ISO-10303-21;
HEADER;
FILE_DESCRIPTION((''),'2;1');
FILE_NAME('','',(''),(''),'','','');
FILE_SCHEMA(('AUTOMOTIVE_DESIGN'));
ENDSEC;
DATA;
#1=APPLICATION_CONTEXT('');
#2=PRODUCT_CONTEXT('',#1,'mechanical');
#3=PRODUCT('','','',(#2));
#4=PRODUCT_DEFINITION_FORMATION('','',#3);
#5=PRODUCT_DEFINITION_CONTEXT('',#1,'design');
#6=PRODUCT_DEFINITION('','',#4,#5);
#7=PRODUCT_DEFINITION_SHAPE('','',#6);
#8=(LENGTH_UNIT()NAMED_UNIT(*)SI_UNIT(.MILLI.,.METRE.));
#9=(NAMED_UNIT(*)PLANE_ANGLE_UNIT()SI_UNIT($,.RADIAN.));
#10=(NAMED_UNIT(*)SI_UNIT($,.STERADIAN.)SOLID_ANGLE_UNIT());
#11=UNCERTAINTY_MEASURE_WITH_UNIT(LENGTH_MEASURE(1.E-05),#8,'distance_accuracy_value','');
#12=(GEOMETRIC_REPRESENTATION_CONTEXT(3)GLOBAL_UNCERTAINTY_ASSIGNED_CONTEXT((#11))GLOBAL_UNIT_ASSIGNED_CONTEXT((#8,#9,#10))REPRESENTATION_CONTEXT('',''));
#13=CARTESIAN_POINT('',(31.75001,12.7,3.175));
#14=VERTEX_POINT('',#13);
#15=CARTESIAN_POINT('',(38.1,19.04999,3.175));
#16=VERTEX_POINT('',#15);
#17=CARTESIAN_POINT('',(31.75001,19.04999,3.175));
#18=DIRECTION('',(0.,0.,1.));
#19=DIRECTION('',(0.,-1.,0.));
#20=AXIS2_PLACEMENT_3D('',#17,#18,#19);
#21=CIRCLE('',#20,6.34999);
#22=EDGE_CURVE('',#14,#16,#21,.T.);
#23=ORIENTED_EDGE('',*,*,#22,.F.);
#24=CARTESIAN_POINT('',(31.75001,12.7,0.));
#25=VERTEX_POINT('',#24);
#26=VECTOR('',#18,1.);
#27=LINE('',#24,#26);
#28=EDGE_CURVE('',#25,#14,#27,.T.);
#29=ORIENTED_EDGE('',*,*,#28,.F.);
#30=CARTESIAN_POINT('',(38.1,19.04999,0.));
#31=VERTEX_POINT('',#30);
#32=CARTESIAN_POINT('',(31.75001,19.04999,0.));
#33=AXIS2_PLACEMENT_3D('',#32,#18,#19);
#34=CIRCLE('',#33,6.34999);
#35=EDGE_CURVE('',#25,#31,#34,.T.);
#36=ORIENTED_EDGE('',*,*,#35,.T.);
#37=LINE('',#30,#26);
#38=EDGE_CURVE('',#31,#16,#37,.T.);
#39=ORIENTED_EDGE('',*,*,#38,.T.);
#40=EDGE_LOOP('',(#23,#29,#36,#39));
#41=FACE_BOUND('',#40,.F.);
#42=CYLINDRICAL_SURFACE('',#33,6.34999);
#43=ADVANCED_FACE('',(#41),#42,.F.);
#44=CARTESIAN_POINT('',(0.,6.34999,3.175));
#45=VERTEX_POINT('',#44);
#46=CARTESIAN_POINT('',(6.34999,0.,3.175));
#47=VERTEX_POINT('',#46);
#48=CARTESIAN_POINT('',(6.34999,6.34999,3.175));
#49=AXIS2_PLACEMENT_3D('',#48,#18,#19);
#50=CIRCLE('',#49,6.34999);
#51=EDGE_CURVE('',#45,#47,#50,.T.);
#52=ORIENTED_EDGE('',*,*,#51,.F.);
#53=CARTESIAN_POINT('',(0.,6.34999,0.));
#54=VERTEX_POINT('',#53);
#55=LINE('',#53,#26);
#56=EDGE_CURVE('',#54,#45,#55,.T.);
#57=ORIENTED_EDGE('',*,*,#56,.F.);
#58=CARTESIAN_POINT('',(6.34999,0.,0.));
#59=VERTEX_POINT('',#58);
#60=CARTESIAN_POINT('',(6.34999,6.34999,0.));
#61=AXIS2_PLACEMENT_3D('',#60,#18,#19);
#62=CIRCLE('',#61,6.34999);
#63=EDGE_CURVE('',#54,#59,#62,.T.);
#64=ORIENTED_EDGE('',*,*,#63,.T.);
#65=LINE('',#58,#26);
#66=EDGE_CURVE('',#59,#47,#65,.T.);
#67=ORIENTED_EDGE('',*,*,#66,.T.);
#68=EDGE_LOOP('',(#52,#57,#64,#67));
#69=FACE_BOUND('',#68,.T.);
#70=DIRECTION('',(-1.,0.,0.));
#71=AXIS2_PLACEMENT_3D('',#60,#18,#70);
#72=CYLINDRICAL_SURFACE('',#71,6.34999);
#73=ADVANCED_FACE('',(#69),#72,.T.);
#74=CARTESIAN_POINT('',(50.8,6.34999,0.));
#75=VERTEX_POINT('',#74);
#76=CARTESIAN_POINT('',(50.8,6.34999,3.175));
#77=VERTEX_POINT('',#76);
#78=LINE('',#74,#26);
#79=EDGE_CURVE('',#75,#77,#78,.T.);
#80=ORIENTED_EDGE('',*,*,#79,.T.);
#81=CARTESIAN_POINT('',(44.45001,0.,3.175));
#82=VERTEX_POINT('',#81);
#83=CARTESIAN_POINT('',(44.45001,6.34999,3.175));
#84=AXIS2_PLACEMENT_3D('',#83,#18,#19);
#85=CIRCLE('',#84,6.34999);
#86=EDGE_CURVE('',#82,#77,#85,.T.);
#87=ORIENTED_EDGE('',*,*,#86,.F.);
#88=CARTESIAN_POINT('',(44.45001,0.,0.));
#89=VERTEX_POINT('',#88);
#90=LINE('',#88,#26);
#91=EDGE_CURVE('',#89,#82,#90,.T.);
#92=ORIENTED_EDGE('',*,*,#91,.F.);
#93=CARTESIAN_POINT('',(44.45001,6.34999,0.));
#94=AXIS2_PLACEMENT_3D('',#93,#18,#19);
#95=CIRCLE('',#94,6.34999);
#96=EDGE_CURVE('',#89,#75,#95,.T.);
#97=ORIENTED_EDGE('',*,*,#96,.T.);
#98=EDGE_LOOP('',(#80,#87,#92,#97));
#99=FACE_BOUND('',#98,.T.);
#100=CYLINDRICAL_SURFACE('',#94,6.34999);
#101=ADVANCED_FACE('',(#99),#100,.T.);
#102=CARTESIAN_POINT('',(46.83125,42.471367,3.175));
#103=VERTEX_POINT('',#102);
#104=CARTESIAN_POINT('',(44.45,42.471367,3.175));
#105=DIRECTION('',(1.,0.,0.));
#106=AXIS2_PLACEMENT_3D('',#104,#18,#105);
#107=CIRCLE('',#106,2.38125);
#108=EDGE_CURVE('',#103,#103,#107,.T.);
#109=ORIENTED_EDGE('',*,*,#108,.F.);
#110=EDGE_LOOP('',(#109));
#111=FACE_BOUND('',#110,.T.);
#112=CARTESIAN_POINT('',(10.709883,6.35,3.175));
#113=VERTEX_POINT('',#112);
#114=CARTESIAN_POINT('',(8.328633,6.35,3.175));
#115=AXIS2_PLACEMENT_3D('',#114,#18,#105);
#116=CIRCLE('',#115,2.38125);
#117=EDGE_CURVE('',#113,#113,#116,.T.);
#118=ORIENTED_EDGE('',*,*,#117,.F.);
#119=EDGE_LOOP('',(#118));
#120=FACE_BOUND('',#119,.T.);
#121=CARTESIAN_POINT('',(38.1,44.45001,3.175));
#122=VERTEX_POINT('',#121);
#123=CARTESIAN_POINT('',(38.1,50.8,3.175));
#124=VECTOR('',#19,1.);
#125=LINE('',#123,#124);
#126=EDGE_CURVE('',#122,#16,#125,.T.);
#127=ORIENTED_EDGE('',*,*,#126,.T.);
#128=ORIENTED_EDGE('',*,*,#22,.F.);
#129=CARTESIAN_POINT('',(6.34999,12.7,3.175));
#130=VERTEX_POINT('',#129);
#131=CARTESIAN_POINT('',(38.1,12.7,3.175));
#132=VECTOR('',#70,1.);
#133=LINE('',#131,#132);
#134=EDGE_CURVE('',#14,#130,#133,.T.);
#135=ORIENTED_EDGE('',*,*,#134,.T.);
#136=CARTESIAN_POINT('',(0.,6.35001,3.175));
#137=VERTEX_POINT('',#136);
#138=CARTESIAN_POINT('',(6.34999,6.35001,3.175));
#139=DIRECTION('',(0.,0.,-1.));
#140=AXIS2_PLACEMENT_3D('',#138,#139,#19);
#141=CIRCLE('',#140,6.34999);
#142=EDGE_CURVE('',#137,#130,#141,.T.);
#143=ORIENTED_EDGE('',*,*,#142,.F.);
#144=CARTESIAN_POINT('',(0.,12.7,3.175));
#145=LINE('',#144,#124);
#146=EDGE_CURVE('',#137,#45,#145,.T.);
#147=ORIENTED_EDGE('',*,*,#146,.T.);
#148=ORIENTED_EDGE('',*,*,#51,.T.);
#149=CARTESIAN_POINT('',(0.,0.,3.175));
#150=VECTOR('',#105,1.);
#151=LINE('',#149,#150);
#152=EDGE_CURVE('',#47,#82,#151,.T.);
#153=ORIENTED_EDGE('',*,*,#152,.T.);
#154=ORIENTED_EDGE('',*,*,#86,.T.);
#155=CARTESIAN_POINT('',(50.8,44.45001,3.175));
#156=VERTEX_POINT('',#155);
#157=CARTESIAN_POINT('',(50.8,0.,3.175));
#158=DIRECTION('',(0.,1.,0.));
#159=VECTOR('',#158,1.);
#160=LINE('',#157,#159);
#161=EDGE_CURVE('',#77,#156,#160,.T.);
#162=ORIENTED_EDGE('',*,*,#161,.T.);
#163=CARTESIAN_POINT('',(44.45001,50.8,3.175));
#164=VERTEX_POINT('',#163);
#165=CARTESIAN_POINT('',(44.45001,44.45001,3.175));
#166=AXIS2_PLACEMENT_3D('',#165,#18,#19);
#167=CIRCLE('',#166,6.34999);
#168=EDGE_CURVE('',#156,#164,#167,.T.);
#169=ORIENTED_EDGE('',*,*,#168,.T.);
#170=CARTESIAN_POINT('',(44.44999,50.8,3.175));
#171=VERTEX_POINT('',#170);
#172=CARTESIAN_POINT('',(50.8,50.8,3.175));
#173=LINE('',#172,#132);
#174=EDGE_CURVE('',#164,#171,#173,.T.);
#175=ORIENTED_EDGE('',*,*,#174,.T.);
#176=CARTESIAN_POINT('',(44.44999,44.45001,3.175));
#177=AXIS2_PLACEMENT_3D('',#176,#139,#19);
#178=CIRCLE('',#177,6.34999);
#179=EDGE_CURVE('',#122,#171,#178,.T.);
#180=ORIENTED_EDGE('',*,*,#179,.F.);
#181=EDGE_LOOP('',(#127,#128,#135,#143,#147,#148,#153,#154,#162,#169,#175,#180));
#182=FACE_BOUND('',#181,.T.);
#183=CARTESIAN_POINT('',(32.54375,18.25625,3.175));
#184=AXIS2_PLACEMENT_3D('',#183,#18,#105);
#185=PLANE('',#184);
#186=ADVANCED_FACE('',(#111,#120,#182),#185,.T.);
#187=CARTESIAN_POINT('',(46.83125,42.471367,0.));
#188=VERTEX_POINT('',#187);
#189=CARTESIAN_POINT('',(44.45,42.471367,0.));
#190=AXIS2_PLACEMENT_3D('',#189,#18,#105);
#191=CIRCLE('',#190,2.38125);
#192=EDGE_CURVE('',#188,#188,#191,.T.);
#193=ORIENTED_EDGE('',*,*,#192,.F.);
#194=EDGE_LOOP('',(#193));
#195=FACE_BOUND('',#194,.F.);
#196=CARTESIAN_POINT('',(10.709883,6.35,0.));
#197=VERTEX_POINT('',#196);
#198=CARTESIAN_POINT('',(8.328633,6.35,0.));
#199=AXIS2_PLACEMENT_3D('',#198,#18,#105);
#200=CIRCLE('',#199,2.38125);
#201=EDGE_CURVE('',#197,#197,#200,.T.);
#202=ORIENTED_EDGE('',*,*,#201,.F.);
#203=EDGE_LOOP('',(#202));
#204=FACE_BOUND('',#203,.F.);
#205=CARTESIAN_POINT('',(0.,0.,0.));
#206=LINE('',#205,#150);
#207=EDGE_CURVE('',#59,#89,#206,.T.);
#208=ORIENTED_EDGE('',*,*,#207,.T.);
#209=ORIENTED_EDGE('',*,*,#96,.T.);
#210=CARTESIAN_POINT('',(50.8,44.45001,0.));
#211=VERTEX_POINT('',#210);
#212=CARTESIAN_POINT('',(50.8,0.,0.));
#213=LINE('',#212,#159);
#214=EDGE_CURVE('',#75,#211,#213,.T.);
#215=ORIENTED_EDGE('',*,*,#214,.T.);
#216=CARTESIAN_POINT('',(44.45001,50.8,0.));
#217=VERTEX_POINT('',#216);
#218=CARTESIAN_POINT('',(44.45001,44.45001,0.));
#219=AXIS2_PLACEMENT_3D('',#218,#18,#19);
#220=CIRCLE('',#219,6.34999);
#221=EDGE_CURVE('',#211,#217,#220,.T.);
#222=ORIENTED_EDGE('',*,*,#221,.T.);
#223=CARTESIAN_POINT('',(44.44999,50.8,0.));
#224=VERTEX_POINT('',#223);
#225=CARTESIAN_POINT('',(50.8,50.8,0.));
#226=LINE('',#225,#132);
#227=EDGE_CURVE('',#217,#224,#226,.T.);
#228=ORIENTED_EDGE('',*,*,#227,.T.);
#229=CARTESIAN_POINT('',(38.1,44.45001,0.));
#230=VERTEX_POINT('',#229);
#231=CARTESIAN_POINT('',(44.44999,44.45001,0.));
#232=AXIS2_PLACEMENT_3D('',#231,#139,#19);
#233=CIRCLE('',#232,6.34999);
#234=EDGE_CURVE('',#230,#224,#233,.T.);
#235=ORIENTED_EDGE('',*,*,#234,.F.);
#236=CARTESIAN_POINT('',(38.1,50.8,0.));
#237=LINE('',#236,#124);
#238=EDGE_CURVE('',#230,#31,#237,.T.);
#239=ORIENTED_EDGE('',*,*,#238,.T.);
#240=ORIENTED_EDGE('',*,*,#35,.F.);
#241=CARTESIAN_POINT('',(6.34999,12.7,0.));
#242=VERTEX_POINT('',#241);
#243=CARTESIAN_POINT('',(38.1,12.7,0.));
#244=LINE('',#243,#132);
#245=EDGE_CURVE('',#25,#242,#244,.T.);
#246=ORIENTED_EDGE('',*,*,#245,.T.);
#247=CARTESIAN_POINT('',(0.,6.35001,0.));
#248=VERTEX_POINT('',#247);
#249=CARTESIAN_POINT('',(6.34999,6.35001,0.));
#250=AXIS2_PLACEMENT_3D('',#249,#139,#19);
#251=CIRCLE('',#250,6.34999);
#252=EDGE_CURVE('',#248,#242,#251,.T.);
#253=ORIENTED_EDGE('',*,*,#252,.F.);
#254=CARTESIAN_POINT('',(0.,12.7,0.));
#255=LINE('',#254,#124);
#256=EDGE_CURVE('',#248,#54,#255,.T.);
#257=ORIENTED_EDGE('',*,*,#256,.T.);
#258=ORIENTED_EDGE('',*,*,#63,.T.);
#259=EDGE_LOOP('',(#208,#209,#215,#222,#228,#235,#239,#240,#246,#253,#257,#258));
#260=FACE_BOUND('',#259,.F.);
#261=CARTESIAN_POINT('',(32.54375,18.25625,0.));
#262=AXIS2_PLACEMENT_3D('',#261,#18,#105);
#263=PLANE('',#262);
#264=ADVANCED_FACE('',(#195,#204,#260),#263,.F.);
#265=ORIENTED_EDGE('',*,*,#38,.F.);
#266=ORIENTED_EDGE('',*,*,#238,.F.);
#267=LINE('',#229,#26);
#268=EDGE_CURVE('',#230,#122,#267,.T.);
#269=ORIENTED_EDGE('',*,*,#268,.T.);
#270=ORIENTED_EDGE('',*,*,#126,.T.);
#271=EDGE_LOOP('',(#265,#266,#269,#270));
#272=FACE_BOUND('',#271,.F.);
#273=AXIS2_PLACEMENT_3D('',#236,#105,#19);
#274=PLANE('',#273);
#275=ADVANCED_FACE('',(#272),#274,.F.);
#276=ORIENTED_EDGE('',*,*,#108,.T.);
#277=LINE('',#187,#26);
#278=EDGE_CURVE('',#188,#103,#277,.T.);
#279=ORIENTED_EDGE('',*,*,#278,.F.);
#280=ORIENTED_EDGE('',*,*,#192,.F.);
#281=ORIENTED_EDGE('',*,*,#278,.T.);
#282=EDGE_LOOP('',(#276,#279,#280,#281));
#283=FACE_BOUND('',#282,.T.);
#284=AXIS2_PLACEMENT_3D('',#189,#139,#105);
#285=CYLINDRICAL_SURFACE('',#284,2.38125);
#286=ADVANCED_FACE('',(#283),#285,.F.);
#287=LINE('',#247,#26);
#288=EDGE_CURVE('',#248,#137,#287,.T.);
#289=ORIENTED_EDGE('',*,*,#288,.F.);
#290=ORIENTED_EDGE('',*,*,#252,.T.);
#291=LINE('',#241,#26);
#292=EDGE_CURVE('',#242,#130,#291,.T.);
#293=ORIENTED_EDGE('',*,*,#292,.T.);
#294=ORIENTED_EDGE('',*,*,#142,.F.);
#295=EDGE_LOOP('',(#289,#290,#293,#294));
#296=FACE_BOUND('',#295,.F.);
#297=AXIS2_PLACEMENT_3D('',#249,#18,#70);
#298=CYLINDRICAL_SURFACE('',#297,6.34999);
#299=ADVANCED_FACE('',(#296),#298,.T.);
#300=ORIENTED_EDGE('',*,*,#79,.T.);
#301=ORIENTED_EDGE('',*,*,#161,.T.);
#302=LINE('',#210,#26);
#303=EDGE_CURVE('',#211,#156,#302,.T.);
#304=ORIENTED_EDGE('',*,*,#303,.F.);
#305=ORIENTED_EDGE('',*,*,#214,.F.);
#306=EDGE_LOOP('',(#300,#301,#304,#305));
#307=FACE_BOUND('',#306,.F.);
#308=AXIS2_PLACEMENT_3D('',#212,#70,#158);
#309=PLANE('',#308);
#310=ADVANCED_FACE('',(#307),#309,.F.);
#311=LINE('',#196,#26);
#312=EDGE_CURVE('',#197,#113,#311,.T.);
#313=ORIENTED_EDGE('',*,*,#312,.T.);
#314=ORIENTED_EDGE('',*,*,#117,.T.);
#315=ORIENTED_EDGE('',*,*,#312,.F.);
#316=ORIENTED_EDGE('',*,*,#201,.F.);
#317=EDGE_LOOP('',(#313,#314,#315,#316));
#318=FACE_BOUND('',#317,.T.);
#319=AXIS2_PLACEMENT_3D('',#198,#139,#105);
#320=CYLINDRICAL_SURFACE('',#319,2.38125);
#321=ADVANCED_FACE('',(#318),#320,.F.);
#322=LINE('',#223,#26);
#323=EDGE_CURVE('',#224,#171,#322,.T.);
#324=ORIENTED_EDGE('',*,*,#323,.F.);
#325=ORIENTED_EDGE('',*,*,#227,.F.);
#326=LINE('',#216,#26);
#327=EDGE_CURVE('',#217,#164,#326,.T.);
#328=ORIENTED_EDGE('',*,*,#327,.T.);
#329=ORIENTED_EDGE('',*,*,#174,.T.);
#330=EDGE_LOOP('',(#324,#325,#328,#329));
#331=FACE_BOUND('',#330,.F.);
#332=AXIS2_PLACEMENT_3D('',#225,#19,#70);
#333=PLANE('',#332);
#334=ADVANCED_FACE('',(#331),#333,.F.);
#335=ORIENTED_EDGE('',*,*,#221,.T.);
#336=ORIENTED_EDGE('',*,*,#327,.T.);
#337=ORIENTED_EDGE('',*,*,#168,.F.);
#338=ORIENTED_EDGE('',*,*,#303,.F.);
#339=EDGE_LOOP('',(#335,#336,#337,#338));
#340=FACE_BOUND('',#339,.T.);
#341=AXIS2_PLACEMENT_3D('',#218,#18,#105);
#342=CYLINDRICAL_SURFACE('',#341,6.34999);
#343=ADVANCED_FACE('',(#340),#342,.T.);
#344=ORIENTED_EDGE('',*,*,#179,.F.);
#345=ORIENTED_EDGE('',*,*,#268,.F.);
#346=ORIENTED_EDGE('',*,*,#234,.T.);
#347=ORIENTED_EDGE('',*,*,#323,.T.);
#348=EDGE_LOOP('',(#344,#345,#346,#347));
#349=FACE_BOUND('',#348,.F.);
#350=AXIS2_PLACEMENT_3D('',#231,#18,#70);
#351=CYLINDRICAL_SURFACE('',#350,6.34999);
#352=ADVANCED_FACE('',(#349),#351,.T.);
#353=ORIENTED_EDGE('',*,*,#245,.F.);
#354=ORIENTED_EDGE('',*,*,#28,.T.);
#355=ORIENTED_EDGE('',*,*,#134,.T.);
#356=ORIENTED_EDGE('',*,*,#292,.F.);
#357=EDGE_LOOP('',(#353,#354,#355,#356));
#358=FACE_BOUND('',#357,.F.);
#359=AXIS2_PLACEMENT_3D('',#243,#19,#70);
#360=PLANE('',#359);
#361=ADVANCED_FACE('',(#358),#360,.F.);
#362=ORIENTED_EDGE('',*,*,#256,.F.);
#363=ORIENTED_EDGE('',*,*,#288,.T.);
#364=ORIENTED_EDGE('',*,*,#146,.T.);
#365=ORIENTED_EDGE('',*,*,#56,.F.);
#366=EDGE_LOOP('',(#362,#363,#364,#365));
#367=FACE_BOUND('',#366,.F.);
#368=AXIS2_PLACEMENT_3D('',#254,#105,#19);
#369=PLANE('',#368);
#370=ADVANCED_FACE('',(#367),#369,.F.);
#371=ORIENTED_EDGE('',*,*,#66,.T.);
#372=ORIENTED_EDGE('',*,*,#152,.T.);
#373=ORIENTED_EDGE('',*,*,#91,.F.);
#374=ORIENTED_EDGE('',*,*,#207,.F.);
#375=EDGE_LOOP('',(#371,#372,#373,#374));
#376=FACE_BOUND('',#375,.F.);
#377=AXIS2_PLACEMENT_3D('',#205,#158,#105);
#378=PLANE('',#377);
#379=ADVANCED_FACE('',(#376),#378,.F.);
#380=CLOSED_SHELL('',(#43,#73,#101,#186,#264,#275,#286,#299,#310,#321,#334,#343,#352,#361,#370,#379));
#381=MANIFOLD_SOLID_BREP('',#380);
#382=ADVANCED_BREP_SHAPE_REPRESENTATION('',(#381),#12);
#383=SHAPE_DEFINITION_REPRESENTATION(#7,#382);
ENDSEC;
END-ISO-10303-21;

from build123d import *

# Parameters (mm, degrees)
F0_R     = 2.38125
F1_DEPTH = 3.175
F2_R     = 6.34999


# Not quite as in the source:
# - a fillet or chamfer is up to 0.001 mm smaller than in the source, because OpenCascade refuses the exact size


with BuildPart() as f1:
    # F0 (on Top) → F1 (new body)
    with BuildSketch(Plane.XY):
        Polygon((0, 12.7), (0, 0), (50.8, 0), (50.8, 50.8), (38.1, 50.8), (38.1, 12.7), align=None)
        with Locations((8.3286329803, 6.35)):
            Circle(F0_R, mode=Mode.SUBTRACT)
        with Locations((44.45, 42.4713670197)):
            Circle(F0_R, mode=Mode.SUBTRACT)
    extrude(amount=F1_DEPTH)

    # F2 (radius 6.35 in the source; OpenCascade refuses exactly that, so slightly less here)
    f2_edges = [f1.edges().sort_by_distance(p)[0] for p in [
        (0, 0, 1.5875),
        (0, 12.7, 1.5875),
        (38.1, 50.8, 1.5875),
        (38.1, 12.7, 1.5875),
        (50.8, 0, 1.5875),
        (50.8, 50.8, 1.5875),
    ]]
    fillet(f2_edges, radius=F2_R)


solid = f1.part
